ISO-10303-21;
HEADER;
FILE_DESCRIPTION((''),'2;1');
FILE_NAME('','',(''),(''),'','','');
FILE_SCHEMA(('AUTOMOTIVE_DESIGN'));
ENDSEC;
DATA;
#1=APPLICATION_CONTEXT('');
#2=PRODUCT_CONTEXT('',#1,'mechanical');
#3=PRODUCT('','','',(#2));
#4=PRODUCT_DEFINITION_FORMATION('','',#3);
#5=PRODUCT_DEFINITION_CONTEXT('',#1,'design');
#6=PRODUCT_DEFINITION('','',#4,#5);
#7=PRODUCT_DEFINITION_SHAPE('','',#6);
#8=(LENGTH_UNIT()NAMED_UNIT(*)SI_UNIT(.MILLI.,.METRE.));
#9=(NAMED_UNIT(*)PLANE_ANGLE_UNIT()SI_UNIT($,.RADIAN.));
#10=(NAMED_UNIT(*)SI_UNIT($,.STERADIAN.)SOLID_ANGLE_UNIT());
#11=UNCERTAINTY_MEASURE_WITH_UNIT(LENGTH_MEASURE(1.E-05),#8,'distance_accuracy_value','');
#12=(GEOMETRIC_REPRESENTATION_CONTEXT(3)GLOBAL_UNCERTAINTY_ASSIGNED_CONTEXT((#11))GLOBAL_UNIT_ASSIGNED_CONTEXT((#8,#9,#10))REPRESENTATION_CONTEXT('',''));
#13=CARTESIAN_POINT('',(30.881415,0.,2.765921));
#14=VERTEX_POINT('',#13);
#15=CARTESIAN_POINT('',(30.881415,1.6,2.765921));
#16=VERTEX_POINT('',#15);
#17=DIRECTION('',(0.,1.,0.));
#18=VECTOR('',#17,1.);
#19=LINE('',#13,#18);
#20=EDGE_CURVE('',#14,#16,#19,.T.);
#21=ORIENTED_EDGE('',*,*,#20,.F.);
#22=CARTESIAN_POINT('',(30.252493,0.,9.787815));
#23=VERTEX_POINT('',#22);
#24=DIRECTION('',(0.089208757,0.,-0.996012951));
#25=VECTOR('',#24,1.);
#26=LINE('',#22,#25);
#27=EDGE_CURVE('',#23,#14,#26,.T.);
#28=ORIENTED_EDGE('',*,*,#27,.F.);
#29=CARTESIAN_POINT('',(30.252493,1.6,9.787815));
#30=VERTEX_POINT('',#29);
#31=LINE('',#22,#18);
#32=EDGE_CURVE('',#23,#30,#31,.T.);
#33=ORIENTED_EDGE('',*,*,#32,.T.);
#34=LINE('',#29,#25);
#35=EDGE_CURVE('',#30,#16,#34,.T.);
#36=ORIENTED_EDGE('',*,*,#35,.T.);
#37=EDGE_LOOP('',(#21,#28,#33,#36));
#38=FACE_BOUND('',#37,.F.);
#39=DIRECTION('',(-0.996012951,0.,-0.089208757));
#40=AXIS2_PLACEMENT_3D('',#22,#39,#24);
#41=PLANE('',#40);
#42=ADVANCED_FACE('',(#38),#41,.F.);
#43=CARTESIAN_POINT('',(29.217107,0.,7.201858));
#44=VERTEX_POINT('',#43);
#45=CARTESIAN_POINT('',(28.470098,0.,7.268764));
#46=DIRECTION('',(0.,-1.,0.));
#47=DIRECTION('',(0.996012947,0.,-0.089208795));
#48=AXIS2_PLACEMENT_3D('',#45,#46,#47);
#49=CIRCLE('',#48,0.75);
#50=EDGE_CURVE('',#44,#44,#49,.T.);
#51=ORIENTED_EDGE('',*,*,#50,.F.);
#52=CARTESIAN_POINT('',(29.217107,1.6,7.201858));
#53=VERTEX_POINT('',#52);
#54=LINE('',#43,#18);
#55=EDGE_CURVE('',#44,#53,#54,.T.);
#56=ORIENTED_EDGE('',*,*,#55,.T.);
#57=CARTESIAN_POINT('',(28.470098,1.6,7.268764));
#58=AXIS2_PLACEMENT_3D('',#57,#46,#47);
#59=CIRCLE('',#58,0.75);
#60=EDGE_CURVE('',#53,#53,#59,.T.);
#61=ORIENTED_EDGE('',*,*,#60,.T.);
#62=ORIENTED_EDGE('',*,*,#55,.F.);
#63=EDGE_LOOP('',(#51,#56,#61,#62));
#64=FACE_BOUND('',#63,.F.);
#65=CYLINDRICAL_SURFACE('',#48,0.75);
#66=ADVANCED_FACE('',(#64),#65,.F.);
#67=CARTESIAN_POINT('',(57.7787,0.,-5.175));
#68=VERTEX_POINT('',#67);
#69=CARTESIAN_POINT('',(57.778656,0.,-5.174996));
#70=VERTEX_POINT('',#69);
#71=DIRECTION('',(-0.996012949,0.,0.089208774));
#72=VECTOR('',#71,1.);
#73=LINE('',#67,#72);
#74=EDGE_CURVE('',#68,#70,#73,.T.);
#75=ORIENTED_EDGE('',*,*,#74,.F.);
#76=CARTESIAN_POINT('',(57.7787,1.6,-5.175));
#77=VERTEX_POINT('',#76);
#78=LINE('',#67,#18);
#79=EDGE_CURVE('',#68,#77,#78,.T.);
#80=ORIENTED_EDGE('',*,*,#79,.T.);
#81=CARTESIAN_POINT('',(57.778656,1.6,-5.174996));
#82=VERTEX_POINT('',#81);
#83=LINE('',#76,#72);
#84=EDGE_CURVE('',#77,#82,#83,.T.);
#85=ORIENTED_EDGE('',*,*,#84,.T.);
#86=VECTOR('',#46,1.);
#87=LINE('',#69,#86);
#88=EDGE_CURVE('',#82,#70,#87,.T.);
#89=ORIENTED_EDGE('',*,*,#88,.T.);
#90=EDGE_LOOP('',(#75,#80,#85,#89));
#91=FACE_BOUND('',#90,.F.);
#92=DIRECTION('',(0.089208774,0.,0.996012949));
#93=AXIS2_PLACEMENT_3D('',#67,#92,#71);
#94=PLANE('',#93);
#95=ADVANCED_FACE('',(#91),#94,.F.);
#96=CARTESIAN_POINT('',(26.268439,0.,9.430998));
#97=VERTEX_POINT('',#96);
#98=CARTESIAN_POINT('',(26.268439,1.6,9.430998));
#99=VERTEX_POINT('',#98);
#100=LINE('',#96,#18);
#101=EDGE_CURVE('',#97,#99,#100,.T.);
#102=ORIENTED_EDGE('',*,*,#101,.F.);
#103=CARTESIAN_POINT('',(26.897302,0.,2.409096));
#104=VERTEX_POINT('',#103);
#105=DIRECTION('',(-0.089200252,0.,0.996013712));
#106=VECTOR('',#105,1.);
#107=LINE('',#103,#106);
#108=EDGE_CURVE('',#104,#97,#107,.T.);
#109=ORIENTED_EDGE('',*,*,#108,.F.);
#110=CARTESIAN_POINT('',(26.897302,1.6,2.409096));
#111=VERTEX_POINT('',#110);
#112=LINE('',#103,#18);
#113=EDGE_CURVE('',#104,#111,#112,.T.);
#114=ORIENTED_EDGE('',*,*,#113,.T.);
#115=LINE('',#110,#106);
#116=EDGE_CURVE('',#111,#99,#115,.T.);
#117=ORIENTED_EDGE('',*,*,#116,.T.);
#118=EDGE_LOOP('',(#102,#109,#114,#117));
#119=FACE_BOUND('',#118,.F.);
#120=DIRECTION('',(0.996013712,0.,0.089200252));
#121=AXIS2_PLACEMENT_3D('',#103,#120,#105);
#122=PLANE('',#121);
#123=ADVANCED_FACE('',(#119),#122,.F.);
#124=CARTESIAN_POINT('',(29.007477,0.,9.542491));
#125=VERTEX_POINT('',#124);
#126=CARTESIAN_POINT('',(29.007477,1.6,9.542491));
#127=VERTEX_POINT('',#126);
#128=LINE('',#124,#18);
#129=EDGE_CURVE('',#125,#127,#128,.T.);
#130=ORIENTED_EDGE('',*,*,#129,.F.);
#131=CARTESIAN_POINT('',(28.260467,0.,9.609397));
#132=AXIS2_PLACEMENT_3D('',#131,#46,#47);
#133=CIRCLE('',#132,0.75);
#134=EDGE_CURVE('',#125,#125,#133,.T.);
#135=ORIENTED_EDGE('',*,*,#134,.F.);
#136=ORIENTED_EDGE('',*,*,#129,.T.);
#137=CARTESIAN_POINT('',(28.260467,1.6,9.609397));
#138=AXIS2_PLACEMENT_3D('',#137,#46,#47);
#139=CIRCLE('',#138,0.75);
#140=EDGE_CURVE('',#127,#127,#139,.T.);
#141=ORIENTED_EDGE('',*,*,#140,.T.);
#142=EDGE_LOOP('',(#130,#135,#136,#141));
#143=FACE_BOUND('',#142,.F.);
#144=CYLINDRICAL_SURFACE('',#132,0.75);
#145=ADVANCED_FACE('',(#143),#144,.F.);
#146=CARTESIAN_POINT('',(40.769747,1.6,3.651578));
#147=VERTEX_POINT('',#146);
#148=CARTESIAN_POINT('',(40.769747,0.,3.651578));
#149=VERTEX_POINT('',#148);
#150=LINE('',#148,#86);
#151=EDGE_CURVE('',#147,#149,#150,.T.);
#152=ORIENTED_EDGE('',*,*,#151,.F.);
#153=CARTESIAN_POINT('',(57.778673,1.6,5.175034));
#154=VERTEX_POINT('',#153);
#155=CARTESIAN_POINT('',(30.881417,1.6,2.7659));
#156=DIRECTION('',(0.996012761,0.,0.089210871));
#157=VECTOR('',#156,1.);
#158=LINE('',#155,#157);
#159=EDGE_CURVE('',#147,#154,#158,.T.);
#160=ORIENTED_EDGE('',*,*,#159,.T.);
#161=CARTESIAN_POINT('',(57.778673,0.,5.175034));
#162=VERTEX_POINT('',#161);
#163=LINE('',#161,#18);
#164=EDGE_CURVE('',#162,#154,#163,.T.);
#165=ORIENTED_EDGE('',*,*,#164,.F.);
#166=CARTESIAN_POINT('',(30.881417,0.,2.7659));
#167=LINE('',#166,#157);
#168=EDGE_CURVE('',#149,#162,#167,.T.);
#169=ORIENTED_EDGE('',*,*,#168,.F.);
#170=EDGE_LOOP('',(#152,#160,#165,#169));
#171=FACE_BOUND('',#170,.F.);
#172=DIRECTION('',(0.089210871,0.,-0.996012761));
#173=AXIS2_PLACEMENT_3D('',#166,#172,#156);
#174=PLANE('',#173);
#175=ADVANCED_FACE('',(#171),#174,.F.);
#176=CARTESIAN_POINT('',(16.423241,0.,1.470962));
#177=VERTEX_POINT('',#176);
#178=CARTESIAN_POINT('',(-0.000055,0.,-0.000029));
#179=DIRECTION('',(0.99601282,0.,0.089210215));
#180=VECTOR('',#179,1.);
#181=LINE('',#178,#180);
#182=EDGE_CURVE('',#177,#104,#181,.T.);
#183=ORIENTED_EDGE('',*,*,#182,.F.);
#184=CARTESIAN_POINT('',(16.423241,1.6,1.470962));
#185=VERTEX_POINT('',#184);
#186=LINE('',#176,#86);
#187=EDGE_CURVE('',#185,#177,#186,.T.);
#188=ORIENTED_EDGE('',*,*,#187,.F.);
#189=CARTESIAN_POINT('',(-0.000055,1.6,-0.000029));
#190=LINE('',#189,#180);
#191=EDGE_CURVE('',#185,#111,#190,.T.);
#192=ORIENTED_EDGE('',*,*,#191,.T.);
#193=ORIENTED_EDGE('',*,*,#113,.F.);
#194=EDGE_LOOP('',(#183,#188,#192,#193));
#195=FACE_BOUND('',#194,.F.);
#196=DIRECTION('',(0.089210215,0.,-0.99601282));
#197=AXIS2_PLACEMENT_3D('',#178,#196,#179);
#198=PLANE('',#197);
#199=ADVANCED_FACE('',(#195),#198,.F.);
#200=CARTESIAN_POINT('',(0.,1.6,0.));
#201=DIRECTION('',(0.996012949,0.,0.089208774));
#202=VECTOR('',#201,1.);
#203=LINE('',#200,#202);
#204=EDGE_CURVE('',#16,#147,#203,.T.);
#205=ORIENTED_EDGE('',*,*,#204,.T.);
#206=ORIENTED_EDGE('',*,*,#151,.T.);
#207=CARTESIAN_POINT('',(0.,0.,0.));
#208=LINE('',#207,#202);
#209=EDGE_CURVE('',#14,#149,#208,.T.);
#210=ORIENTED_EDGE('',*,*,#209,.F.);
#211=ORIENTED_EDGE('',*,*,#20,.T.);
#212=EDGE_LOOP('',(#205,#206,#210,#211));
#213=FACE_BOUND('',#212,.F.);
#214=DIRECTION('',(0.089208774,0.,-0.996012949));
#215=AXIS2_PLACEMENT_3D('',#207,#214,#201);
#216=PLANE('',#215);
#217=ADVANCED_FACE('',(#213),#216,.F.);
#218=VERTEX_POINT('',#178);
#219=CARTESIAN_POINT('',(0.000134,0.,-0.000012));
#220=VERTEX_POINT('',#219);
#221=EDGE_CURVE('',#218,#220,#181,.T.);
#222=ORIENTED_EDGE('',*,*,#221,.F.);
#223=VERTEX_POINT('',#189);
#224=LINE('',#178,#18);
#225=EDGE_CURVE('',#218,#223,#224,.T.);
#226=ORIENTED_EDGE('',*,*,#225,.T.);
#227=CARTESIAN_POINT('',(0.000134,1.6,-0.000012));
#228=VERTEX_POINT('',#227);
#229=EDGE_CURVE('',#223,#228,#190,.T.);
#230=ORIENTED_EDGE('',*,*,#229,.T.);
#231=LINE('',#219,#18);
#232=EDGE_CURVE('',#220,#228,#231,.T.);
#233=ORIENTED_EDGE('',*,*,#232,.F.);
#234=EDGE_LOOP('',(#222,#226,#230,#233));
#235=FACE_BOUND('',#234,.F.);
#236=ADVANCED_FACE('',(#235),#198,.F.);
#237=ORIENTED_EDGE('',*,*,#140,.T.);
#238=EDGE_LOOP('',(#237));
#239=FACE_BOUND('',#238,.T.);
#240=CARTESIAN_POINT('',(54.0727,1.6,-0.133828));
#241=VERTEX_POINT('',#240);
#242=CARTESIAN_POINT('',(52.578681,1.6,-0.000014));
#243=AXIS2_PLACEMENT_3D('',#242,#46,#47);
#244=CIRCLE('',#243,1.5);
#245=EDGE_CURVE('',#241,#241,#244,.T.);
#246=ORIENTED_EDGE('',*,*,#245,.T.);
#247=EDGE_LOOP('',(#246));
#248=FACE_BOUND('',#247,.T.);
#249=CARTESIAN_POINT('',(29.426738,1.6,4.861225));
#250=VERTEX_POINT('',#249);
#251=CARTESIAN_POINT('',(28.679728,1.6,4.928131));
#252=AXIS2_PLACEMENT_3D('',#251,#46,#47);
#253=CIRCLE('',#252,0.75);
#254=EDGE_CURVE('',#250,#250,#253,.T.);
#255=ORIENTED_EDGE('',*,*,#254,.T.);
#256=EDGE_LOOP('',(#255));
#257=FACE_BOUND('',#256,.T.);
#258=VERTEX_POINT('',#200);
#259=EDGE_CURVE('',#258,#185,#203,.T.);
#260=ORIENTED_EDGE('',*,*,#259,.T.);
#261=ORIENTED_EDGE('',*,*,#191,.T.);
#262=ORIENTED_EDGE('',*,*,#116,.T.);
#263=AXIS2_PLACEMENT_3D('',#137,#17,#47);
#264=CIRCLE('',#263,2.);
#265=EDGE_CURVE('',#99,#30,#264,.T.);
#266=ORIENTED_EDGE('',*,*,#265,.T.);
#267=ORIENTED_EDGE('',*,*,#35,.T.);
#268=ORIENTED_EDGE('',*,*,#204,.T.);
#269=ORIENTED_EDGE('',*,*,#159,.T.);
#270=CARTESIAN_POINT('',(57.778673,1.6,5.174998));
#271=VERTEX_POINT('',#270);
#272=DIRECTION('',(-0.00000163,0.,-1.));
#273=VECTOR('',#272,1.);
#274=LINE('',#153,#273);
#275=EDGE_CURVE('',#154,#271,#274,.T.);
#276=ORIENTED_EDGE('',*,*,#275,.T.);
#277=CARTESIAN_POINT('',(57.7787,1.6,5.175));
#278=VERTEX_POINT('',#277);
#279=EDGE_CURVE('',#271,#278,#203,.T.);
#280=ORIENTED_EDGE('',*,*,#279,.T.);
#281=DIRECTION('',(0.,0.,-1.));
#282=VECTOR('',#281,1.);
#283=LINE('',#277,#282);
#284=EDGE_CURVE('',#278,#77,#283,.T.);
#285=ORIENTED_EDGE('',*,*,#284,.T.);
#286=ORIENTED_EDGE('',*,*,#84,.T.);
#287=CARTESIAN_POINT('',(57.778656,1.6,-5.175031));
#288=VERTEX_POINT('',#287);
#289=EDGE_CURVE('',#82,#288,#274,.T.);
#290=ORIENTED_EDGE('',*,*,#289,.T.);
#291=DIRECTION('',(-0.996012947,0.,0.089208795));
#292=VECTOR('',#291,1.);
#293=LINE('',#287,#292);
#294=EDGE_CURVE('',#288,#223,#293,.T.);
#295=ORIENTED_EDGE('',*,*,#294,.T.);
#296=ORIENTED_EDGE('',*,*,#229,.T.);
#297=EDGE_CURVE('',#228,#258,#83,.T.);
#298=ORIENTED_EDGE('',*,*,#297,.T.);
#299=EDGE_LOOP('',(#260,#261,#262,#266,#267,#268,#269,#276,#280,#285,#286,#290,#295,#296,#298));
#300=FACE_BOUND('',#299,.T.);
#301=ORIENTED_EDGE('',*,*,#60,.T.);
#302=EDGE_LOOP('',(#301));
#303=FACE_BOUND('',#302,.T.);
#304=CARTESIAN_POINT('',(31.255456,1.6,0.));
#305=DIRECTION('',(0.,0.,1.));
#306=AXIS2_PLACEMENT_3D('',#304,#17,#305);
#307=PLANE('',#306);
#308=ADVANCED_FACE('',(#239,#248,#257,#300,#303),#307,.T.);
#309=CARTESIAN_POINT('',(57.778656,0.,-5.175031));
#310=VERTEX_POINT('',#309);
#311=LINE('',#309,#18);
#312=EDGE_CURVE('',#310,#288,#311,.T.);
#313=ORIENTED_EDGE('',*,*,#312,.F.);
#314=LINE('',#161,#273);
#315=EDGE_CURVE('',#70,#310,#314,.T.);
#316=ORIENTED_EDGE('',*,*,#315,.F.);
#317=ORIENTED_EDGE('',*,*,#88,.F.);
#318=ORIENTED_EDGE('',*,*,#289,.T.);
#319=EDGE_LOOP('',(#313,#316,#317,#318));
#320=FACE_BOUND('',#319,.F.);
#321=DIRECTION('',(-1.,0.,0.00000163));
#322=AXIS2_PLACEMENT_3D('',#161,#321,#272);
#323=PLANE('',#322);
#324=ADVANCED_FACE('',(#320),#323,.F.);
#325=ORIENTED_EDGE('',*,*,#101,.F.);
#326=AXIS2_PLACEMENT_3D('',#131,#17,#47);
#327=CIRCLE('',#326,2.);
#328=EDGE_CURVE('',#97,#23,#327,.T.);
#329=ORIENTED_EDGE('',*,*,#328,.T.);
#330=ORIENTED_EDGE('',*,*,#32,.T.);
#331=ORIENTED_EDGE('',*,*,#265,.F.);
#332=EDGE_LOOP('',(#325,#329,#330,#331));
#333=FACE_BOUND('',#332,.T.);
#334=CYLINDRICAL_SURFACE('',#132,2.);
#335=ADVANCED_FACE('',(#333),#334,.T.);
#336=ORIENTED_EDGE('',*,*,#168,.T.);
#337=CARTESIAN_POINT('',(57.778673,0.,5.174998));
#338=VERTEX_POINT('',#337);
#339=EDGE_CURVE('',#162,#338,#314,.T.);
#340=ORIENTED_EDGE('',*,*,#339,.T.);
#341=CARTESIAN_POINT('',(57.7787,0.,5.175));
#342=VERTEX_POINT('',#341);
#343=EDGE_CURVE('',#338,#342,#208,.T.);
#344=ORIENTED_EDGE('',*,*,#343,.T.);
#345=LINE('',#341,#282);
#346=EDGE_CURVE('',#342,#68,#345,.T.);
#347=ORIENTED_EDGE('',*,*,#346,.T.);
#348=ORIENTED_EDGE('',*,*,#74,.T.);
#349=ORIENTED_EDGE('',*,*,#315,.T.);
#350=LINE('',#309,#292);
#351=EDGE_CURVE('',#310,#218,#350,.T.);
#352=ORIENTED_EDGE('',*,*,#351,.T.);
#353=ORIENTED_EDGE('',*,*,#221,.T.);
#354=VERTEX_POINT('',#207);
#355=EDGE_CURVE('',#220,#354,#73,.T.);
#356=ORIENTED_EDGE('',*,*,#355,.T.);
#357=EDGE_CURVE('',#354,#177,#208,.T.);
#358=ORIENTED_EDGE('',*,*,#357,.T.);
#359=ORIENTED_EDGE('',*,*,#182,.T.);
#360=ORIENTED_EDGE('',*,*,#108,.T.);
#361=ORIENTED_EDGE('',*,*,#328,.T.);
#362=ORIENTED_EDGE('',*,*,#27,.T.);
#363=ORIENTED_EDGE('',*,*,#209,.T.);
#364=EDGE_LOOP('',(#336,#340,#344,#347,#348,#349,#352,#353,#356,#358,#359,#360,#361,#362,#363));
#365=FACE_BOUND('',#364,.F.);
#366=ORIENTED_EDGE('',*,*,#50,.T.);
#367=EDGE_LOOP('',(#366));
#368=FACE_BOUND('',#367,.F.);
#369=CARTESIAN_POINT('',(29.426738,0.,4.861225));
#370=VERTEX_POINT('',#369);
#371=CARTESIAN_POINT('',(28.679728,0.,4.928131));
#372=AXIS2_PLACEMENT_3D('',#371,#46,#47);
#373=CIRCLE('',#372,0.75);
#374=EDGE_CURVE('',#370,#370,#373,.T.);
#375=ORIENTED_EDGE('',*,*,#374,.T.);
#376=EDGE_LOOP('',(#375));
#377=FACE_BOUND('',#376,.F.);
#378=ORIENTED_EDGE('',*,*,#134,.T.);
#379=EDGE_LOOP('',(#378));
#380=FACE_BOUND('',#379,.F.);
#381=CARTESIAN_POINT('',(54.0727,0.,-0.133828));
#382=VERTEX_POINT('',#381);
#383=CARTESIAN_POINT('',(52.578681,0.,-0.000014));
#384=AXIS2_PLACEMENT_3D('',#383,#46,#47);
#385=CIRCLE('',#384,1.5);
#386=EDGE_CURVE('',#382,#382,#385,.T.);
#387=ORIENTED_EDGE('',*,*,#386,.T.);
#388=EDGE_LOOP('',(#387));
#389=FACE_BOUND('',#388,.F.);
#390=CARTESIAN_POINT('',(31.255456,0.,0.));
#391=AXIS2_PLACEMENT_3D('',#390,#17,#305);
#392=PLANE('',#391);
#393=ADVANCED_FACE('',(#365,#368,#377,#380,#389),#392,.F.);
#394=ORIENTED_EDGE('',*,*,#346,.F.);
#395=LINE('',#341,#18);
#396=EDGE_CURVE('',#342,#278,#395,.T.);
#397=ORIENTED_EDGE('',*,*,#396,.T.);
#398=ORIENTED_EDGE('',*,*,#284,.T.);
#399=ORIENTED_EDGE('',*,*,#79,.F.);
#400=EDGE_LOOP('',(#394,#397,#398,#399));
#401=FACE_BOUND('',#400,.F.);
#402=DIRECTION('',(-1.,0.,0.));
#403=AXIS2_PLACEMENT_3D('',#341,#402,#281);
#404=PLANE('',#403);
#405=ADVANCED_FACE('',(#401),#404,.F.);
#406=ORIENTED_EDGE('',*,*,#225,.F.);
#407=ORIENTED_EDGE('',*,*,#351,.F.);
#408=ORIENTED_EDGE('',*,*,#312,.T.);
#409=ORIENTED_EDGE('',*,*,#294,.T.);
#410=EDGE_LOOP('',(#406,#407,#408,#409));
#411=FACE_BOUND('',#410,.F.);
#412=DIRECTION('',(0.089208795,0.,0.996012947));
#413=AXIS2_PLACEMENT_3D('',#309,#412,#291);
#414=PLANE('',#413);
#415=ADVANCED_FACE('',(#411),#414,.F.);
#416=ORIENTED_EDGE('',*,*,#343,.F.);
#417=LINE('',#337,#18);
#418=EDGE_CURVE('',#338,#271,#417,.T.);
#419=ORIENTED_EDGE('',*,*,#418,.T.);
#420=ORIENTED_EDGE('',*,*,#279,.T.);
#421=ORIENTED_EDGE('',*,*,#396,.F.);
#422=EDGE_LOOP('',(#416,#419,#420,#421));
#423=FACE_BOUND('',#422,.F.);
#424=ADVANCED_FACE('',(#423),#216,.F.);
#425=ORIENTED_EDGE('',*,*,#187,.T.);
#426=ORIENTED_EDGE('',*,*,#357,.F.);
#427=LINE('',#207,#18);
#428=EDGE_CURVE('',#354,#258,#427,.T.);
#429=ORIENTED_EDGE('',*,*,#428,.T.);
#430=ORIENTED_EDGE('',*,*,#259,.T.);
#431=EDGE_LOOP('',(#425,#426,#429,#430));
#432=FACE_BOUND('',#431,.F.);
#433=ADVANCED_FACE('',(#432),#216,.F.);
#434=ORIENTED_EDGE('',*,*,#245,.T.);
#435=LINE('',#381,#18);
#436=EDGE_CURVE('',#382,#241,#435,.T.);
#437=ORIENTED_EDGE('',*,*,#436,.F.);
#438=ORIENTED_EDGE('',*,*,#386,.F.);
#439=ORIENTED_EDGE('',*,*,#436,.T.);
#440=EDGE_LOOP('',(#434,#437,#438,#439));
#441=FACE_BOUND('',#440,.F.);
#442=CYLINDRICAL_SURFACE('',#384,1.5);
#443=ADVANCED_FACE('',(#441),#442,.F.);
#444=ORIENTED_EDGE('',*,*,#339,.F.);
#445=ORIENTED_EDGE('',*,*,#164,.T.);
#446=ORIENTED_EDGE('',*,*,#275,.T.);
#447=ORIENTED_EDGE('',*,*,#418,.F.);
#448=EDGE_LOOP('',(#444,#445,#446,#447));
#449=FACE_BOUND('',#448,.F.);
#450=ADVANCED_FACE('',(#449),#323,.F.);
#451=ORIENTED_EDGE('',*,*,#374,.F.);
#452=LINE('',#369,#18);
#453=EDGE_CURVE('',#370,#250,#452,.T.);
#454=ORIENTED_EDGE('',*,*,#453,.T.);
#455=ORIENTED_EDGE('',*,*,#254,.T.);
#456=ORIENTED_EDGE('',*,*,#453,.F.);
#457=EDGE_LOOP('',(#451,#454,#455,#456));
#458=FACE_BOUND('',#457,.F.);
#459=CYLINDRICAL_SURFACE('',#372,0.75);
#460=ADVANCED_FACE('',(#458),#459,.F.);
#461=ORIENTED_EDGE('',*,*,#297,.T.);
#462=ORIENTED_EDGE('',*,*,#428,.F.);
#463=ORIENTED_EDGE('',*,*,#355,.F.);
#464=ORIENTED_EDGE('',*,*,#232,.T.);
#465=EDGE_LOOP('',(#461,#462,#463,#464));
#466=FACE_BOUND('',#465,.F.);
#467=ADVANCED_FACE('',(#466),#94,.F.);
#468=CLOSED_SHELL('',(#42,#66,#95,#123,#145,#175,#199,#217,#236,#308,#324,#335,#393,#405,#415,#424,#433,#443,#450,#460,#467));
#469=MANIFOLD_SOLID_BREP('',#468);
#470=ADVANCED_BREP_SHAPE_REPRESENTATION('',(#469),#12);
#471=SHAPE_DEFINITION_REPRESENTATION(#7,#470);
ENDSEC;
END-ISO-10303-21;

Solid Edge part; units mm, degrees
sketch "Sketch1" plane through (0, 0, 0) normal (0, -1, 0) x (1, 0, 0)
  line L0 (0, 0) -> (57.7787, 5.175)
  line L1 (57.7787, 5.175) -> (57.7787, -5.175)
  line L2 (57.7787, -5.175) -> (0, 0)
extrude "Protrusion1" add sketch "Sketch1" against normal blind 1.6
sketch "Sketch2" plane through (28.8062, 0, 0) normal (0, -1, 0) x (0.996013, 0, -0.0892088)
  circle A0 centre (23.6777, 2.1207) radius 1.5
extrude "Cutout1" cut sketch "Sketch2" against normal up to next
sketch "Sketch3" plane through (28.8062, 0, 0) normal (0, -1, 0) x (0.996013, 0, -0.0892088)
  circle A0 centre (23.6777, 2.1207) radius 1.5
  line L0 (29.3186, -2.5698) -> (-28.6914, -2.5698)
  line L1 (28.3953, 7.739) -> (29.3186, -2.5698)
  line L2 (1.8202, 2.94) -> (28.3953, 7.739)
  line L3 (0.5673, 9.8778) -> (1.8202, 2.94)
  arc A1 (-3.369, 9.167) -> (0.5673, 9.8778) centre (-1.4008, 9.5224) cw
  line L4 (-2.1162, 2.2292) -> (-3.369, 9.167)
  line L5 (-28.6914, -2.5698) -> (-2.1162, 2.2292)
  circle A2 centre (-0.5656, 4.8972) radius 0.75
  circle A3 centre (-0.9832, 7.2098) radius 0.75
  circle A4 centre (-1.4008, 9.5224) radius 0.75
extrude "Protrusion2" add sketch "Sketch3" against normal up to vertex (1.6 mm away)
properties material "Wood, balsa"
